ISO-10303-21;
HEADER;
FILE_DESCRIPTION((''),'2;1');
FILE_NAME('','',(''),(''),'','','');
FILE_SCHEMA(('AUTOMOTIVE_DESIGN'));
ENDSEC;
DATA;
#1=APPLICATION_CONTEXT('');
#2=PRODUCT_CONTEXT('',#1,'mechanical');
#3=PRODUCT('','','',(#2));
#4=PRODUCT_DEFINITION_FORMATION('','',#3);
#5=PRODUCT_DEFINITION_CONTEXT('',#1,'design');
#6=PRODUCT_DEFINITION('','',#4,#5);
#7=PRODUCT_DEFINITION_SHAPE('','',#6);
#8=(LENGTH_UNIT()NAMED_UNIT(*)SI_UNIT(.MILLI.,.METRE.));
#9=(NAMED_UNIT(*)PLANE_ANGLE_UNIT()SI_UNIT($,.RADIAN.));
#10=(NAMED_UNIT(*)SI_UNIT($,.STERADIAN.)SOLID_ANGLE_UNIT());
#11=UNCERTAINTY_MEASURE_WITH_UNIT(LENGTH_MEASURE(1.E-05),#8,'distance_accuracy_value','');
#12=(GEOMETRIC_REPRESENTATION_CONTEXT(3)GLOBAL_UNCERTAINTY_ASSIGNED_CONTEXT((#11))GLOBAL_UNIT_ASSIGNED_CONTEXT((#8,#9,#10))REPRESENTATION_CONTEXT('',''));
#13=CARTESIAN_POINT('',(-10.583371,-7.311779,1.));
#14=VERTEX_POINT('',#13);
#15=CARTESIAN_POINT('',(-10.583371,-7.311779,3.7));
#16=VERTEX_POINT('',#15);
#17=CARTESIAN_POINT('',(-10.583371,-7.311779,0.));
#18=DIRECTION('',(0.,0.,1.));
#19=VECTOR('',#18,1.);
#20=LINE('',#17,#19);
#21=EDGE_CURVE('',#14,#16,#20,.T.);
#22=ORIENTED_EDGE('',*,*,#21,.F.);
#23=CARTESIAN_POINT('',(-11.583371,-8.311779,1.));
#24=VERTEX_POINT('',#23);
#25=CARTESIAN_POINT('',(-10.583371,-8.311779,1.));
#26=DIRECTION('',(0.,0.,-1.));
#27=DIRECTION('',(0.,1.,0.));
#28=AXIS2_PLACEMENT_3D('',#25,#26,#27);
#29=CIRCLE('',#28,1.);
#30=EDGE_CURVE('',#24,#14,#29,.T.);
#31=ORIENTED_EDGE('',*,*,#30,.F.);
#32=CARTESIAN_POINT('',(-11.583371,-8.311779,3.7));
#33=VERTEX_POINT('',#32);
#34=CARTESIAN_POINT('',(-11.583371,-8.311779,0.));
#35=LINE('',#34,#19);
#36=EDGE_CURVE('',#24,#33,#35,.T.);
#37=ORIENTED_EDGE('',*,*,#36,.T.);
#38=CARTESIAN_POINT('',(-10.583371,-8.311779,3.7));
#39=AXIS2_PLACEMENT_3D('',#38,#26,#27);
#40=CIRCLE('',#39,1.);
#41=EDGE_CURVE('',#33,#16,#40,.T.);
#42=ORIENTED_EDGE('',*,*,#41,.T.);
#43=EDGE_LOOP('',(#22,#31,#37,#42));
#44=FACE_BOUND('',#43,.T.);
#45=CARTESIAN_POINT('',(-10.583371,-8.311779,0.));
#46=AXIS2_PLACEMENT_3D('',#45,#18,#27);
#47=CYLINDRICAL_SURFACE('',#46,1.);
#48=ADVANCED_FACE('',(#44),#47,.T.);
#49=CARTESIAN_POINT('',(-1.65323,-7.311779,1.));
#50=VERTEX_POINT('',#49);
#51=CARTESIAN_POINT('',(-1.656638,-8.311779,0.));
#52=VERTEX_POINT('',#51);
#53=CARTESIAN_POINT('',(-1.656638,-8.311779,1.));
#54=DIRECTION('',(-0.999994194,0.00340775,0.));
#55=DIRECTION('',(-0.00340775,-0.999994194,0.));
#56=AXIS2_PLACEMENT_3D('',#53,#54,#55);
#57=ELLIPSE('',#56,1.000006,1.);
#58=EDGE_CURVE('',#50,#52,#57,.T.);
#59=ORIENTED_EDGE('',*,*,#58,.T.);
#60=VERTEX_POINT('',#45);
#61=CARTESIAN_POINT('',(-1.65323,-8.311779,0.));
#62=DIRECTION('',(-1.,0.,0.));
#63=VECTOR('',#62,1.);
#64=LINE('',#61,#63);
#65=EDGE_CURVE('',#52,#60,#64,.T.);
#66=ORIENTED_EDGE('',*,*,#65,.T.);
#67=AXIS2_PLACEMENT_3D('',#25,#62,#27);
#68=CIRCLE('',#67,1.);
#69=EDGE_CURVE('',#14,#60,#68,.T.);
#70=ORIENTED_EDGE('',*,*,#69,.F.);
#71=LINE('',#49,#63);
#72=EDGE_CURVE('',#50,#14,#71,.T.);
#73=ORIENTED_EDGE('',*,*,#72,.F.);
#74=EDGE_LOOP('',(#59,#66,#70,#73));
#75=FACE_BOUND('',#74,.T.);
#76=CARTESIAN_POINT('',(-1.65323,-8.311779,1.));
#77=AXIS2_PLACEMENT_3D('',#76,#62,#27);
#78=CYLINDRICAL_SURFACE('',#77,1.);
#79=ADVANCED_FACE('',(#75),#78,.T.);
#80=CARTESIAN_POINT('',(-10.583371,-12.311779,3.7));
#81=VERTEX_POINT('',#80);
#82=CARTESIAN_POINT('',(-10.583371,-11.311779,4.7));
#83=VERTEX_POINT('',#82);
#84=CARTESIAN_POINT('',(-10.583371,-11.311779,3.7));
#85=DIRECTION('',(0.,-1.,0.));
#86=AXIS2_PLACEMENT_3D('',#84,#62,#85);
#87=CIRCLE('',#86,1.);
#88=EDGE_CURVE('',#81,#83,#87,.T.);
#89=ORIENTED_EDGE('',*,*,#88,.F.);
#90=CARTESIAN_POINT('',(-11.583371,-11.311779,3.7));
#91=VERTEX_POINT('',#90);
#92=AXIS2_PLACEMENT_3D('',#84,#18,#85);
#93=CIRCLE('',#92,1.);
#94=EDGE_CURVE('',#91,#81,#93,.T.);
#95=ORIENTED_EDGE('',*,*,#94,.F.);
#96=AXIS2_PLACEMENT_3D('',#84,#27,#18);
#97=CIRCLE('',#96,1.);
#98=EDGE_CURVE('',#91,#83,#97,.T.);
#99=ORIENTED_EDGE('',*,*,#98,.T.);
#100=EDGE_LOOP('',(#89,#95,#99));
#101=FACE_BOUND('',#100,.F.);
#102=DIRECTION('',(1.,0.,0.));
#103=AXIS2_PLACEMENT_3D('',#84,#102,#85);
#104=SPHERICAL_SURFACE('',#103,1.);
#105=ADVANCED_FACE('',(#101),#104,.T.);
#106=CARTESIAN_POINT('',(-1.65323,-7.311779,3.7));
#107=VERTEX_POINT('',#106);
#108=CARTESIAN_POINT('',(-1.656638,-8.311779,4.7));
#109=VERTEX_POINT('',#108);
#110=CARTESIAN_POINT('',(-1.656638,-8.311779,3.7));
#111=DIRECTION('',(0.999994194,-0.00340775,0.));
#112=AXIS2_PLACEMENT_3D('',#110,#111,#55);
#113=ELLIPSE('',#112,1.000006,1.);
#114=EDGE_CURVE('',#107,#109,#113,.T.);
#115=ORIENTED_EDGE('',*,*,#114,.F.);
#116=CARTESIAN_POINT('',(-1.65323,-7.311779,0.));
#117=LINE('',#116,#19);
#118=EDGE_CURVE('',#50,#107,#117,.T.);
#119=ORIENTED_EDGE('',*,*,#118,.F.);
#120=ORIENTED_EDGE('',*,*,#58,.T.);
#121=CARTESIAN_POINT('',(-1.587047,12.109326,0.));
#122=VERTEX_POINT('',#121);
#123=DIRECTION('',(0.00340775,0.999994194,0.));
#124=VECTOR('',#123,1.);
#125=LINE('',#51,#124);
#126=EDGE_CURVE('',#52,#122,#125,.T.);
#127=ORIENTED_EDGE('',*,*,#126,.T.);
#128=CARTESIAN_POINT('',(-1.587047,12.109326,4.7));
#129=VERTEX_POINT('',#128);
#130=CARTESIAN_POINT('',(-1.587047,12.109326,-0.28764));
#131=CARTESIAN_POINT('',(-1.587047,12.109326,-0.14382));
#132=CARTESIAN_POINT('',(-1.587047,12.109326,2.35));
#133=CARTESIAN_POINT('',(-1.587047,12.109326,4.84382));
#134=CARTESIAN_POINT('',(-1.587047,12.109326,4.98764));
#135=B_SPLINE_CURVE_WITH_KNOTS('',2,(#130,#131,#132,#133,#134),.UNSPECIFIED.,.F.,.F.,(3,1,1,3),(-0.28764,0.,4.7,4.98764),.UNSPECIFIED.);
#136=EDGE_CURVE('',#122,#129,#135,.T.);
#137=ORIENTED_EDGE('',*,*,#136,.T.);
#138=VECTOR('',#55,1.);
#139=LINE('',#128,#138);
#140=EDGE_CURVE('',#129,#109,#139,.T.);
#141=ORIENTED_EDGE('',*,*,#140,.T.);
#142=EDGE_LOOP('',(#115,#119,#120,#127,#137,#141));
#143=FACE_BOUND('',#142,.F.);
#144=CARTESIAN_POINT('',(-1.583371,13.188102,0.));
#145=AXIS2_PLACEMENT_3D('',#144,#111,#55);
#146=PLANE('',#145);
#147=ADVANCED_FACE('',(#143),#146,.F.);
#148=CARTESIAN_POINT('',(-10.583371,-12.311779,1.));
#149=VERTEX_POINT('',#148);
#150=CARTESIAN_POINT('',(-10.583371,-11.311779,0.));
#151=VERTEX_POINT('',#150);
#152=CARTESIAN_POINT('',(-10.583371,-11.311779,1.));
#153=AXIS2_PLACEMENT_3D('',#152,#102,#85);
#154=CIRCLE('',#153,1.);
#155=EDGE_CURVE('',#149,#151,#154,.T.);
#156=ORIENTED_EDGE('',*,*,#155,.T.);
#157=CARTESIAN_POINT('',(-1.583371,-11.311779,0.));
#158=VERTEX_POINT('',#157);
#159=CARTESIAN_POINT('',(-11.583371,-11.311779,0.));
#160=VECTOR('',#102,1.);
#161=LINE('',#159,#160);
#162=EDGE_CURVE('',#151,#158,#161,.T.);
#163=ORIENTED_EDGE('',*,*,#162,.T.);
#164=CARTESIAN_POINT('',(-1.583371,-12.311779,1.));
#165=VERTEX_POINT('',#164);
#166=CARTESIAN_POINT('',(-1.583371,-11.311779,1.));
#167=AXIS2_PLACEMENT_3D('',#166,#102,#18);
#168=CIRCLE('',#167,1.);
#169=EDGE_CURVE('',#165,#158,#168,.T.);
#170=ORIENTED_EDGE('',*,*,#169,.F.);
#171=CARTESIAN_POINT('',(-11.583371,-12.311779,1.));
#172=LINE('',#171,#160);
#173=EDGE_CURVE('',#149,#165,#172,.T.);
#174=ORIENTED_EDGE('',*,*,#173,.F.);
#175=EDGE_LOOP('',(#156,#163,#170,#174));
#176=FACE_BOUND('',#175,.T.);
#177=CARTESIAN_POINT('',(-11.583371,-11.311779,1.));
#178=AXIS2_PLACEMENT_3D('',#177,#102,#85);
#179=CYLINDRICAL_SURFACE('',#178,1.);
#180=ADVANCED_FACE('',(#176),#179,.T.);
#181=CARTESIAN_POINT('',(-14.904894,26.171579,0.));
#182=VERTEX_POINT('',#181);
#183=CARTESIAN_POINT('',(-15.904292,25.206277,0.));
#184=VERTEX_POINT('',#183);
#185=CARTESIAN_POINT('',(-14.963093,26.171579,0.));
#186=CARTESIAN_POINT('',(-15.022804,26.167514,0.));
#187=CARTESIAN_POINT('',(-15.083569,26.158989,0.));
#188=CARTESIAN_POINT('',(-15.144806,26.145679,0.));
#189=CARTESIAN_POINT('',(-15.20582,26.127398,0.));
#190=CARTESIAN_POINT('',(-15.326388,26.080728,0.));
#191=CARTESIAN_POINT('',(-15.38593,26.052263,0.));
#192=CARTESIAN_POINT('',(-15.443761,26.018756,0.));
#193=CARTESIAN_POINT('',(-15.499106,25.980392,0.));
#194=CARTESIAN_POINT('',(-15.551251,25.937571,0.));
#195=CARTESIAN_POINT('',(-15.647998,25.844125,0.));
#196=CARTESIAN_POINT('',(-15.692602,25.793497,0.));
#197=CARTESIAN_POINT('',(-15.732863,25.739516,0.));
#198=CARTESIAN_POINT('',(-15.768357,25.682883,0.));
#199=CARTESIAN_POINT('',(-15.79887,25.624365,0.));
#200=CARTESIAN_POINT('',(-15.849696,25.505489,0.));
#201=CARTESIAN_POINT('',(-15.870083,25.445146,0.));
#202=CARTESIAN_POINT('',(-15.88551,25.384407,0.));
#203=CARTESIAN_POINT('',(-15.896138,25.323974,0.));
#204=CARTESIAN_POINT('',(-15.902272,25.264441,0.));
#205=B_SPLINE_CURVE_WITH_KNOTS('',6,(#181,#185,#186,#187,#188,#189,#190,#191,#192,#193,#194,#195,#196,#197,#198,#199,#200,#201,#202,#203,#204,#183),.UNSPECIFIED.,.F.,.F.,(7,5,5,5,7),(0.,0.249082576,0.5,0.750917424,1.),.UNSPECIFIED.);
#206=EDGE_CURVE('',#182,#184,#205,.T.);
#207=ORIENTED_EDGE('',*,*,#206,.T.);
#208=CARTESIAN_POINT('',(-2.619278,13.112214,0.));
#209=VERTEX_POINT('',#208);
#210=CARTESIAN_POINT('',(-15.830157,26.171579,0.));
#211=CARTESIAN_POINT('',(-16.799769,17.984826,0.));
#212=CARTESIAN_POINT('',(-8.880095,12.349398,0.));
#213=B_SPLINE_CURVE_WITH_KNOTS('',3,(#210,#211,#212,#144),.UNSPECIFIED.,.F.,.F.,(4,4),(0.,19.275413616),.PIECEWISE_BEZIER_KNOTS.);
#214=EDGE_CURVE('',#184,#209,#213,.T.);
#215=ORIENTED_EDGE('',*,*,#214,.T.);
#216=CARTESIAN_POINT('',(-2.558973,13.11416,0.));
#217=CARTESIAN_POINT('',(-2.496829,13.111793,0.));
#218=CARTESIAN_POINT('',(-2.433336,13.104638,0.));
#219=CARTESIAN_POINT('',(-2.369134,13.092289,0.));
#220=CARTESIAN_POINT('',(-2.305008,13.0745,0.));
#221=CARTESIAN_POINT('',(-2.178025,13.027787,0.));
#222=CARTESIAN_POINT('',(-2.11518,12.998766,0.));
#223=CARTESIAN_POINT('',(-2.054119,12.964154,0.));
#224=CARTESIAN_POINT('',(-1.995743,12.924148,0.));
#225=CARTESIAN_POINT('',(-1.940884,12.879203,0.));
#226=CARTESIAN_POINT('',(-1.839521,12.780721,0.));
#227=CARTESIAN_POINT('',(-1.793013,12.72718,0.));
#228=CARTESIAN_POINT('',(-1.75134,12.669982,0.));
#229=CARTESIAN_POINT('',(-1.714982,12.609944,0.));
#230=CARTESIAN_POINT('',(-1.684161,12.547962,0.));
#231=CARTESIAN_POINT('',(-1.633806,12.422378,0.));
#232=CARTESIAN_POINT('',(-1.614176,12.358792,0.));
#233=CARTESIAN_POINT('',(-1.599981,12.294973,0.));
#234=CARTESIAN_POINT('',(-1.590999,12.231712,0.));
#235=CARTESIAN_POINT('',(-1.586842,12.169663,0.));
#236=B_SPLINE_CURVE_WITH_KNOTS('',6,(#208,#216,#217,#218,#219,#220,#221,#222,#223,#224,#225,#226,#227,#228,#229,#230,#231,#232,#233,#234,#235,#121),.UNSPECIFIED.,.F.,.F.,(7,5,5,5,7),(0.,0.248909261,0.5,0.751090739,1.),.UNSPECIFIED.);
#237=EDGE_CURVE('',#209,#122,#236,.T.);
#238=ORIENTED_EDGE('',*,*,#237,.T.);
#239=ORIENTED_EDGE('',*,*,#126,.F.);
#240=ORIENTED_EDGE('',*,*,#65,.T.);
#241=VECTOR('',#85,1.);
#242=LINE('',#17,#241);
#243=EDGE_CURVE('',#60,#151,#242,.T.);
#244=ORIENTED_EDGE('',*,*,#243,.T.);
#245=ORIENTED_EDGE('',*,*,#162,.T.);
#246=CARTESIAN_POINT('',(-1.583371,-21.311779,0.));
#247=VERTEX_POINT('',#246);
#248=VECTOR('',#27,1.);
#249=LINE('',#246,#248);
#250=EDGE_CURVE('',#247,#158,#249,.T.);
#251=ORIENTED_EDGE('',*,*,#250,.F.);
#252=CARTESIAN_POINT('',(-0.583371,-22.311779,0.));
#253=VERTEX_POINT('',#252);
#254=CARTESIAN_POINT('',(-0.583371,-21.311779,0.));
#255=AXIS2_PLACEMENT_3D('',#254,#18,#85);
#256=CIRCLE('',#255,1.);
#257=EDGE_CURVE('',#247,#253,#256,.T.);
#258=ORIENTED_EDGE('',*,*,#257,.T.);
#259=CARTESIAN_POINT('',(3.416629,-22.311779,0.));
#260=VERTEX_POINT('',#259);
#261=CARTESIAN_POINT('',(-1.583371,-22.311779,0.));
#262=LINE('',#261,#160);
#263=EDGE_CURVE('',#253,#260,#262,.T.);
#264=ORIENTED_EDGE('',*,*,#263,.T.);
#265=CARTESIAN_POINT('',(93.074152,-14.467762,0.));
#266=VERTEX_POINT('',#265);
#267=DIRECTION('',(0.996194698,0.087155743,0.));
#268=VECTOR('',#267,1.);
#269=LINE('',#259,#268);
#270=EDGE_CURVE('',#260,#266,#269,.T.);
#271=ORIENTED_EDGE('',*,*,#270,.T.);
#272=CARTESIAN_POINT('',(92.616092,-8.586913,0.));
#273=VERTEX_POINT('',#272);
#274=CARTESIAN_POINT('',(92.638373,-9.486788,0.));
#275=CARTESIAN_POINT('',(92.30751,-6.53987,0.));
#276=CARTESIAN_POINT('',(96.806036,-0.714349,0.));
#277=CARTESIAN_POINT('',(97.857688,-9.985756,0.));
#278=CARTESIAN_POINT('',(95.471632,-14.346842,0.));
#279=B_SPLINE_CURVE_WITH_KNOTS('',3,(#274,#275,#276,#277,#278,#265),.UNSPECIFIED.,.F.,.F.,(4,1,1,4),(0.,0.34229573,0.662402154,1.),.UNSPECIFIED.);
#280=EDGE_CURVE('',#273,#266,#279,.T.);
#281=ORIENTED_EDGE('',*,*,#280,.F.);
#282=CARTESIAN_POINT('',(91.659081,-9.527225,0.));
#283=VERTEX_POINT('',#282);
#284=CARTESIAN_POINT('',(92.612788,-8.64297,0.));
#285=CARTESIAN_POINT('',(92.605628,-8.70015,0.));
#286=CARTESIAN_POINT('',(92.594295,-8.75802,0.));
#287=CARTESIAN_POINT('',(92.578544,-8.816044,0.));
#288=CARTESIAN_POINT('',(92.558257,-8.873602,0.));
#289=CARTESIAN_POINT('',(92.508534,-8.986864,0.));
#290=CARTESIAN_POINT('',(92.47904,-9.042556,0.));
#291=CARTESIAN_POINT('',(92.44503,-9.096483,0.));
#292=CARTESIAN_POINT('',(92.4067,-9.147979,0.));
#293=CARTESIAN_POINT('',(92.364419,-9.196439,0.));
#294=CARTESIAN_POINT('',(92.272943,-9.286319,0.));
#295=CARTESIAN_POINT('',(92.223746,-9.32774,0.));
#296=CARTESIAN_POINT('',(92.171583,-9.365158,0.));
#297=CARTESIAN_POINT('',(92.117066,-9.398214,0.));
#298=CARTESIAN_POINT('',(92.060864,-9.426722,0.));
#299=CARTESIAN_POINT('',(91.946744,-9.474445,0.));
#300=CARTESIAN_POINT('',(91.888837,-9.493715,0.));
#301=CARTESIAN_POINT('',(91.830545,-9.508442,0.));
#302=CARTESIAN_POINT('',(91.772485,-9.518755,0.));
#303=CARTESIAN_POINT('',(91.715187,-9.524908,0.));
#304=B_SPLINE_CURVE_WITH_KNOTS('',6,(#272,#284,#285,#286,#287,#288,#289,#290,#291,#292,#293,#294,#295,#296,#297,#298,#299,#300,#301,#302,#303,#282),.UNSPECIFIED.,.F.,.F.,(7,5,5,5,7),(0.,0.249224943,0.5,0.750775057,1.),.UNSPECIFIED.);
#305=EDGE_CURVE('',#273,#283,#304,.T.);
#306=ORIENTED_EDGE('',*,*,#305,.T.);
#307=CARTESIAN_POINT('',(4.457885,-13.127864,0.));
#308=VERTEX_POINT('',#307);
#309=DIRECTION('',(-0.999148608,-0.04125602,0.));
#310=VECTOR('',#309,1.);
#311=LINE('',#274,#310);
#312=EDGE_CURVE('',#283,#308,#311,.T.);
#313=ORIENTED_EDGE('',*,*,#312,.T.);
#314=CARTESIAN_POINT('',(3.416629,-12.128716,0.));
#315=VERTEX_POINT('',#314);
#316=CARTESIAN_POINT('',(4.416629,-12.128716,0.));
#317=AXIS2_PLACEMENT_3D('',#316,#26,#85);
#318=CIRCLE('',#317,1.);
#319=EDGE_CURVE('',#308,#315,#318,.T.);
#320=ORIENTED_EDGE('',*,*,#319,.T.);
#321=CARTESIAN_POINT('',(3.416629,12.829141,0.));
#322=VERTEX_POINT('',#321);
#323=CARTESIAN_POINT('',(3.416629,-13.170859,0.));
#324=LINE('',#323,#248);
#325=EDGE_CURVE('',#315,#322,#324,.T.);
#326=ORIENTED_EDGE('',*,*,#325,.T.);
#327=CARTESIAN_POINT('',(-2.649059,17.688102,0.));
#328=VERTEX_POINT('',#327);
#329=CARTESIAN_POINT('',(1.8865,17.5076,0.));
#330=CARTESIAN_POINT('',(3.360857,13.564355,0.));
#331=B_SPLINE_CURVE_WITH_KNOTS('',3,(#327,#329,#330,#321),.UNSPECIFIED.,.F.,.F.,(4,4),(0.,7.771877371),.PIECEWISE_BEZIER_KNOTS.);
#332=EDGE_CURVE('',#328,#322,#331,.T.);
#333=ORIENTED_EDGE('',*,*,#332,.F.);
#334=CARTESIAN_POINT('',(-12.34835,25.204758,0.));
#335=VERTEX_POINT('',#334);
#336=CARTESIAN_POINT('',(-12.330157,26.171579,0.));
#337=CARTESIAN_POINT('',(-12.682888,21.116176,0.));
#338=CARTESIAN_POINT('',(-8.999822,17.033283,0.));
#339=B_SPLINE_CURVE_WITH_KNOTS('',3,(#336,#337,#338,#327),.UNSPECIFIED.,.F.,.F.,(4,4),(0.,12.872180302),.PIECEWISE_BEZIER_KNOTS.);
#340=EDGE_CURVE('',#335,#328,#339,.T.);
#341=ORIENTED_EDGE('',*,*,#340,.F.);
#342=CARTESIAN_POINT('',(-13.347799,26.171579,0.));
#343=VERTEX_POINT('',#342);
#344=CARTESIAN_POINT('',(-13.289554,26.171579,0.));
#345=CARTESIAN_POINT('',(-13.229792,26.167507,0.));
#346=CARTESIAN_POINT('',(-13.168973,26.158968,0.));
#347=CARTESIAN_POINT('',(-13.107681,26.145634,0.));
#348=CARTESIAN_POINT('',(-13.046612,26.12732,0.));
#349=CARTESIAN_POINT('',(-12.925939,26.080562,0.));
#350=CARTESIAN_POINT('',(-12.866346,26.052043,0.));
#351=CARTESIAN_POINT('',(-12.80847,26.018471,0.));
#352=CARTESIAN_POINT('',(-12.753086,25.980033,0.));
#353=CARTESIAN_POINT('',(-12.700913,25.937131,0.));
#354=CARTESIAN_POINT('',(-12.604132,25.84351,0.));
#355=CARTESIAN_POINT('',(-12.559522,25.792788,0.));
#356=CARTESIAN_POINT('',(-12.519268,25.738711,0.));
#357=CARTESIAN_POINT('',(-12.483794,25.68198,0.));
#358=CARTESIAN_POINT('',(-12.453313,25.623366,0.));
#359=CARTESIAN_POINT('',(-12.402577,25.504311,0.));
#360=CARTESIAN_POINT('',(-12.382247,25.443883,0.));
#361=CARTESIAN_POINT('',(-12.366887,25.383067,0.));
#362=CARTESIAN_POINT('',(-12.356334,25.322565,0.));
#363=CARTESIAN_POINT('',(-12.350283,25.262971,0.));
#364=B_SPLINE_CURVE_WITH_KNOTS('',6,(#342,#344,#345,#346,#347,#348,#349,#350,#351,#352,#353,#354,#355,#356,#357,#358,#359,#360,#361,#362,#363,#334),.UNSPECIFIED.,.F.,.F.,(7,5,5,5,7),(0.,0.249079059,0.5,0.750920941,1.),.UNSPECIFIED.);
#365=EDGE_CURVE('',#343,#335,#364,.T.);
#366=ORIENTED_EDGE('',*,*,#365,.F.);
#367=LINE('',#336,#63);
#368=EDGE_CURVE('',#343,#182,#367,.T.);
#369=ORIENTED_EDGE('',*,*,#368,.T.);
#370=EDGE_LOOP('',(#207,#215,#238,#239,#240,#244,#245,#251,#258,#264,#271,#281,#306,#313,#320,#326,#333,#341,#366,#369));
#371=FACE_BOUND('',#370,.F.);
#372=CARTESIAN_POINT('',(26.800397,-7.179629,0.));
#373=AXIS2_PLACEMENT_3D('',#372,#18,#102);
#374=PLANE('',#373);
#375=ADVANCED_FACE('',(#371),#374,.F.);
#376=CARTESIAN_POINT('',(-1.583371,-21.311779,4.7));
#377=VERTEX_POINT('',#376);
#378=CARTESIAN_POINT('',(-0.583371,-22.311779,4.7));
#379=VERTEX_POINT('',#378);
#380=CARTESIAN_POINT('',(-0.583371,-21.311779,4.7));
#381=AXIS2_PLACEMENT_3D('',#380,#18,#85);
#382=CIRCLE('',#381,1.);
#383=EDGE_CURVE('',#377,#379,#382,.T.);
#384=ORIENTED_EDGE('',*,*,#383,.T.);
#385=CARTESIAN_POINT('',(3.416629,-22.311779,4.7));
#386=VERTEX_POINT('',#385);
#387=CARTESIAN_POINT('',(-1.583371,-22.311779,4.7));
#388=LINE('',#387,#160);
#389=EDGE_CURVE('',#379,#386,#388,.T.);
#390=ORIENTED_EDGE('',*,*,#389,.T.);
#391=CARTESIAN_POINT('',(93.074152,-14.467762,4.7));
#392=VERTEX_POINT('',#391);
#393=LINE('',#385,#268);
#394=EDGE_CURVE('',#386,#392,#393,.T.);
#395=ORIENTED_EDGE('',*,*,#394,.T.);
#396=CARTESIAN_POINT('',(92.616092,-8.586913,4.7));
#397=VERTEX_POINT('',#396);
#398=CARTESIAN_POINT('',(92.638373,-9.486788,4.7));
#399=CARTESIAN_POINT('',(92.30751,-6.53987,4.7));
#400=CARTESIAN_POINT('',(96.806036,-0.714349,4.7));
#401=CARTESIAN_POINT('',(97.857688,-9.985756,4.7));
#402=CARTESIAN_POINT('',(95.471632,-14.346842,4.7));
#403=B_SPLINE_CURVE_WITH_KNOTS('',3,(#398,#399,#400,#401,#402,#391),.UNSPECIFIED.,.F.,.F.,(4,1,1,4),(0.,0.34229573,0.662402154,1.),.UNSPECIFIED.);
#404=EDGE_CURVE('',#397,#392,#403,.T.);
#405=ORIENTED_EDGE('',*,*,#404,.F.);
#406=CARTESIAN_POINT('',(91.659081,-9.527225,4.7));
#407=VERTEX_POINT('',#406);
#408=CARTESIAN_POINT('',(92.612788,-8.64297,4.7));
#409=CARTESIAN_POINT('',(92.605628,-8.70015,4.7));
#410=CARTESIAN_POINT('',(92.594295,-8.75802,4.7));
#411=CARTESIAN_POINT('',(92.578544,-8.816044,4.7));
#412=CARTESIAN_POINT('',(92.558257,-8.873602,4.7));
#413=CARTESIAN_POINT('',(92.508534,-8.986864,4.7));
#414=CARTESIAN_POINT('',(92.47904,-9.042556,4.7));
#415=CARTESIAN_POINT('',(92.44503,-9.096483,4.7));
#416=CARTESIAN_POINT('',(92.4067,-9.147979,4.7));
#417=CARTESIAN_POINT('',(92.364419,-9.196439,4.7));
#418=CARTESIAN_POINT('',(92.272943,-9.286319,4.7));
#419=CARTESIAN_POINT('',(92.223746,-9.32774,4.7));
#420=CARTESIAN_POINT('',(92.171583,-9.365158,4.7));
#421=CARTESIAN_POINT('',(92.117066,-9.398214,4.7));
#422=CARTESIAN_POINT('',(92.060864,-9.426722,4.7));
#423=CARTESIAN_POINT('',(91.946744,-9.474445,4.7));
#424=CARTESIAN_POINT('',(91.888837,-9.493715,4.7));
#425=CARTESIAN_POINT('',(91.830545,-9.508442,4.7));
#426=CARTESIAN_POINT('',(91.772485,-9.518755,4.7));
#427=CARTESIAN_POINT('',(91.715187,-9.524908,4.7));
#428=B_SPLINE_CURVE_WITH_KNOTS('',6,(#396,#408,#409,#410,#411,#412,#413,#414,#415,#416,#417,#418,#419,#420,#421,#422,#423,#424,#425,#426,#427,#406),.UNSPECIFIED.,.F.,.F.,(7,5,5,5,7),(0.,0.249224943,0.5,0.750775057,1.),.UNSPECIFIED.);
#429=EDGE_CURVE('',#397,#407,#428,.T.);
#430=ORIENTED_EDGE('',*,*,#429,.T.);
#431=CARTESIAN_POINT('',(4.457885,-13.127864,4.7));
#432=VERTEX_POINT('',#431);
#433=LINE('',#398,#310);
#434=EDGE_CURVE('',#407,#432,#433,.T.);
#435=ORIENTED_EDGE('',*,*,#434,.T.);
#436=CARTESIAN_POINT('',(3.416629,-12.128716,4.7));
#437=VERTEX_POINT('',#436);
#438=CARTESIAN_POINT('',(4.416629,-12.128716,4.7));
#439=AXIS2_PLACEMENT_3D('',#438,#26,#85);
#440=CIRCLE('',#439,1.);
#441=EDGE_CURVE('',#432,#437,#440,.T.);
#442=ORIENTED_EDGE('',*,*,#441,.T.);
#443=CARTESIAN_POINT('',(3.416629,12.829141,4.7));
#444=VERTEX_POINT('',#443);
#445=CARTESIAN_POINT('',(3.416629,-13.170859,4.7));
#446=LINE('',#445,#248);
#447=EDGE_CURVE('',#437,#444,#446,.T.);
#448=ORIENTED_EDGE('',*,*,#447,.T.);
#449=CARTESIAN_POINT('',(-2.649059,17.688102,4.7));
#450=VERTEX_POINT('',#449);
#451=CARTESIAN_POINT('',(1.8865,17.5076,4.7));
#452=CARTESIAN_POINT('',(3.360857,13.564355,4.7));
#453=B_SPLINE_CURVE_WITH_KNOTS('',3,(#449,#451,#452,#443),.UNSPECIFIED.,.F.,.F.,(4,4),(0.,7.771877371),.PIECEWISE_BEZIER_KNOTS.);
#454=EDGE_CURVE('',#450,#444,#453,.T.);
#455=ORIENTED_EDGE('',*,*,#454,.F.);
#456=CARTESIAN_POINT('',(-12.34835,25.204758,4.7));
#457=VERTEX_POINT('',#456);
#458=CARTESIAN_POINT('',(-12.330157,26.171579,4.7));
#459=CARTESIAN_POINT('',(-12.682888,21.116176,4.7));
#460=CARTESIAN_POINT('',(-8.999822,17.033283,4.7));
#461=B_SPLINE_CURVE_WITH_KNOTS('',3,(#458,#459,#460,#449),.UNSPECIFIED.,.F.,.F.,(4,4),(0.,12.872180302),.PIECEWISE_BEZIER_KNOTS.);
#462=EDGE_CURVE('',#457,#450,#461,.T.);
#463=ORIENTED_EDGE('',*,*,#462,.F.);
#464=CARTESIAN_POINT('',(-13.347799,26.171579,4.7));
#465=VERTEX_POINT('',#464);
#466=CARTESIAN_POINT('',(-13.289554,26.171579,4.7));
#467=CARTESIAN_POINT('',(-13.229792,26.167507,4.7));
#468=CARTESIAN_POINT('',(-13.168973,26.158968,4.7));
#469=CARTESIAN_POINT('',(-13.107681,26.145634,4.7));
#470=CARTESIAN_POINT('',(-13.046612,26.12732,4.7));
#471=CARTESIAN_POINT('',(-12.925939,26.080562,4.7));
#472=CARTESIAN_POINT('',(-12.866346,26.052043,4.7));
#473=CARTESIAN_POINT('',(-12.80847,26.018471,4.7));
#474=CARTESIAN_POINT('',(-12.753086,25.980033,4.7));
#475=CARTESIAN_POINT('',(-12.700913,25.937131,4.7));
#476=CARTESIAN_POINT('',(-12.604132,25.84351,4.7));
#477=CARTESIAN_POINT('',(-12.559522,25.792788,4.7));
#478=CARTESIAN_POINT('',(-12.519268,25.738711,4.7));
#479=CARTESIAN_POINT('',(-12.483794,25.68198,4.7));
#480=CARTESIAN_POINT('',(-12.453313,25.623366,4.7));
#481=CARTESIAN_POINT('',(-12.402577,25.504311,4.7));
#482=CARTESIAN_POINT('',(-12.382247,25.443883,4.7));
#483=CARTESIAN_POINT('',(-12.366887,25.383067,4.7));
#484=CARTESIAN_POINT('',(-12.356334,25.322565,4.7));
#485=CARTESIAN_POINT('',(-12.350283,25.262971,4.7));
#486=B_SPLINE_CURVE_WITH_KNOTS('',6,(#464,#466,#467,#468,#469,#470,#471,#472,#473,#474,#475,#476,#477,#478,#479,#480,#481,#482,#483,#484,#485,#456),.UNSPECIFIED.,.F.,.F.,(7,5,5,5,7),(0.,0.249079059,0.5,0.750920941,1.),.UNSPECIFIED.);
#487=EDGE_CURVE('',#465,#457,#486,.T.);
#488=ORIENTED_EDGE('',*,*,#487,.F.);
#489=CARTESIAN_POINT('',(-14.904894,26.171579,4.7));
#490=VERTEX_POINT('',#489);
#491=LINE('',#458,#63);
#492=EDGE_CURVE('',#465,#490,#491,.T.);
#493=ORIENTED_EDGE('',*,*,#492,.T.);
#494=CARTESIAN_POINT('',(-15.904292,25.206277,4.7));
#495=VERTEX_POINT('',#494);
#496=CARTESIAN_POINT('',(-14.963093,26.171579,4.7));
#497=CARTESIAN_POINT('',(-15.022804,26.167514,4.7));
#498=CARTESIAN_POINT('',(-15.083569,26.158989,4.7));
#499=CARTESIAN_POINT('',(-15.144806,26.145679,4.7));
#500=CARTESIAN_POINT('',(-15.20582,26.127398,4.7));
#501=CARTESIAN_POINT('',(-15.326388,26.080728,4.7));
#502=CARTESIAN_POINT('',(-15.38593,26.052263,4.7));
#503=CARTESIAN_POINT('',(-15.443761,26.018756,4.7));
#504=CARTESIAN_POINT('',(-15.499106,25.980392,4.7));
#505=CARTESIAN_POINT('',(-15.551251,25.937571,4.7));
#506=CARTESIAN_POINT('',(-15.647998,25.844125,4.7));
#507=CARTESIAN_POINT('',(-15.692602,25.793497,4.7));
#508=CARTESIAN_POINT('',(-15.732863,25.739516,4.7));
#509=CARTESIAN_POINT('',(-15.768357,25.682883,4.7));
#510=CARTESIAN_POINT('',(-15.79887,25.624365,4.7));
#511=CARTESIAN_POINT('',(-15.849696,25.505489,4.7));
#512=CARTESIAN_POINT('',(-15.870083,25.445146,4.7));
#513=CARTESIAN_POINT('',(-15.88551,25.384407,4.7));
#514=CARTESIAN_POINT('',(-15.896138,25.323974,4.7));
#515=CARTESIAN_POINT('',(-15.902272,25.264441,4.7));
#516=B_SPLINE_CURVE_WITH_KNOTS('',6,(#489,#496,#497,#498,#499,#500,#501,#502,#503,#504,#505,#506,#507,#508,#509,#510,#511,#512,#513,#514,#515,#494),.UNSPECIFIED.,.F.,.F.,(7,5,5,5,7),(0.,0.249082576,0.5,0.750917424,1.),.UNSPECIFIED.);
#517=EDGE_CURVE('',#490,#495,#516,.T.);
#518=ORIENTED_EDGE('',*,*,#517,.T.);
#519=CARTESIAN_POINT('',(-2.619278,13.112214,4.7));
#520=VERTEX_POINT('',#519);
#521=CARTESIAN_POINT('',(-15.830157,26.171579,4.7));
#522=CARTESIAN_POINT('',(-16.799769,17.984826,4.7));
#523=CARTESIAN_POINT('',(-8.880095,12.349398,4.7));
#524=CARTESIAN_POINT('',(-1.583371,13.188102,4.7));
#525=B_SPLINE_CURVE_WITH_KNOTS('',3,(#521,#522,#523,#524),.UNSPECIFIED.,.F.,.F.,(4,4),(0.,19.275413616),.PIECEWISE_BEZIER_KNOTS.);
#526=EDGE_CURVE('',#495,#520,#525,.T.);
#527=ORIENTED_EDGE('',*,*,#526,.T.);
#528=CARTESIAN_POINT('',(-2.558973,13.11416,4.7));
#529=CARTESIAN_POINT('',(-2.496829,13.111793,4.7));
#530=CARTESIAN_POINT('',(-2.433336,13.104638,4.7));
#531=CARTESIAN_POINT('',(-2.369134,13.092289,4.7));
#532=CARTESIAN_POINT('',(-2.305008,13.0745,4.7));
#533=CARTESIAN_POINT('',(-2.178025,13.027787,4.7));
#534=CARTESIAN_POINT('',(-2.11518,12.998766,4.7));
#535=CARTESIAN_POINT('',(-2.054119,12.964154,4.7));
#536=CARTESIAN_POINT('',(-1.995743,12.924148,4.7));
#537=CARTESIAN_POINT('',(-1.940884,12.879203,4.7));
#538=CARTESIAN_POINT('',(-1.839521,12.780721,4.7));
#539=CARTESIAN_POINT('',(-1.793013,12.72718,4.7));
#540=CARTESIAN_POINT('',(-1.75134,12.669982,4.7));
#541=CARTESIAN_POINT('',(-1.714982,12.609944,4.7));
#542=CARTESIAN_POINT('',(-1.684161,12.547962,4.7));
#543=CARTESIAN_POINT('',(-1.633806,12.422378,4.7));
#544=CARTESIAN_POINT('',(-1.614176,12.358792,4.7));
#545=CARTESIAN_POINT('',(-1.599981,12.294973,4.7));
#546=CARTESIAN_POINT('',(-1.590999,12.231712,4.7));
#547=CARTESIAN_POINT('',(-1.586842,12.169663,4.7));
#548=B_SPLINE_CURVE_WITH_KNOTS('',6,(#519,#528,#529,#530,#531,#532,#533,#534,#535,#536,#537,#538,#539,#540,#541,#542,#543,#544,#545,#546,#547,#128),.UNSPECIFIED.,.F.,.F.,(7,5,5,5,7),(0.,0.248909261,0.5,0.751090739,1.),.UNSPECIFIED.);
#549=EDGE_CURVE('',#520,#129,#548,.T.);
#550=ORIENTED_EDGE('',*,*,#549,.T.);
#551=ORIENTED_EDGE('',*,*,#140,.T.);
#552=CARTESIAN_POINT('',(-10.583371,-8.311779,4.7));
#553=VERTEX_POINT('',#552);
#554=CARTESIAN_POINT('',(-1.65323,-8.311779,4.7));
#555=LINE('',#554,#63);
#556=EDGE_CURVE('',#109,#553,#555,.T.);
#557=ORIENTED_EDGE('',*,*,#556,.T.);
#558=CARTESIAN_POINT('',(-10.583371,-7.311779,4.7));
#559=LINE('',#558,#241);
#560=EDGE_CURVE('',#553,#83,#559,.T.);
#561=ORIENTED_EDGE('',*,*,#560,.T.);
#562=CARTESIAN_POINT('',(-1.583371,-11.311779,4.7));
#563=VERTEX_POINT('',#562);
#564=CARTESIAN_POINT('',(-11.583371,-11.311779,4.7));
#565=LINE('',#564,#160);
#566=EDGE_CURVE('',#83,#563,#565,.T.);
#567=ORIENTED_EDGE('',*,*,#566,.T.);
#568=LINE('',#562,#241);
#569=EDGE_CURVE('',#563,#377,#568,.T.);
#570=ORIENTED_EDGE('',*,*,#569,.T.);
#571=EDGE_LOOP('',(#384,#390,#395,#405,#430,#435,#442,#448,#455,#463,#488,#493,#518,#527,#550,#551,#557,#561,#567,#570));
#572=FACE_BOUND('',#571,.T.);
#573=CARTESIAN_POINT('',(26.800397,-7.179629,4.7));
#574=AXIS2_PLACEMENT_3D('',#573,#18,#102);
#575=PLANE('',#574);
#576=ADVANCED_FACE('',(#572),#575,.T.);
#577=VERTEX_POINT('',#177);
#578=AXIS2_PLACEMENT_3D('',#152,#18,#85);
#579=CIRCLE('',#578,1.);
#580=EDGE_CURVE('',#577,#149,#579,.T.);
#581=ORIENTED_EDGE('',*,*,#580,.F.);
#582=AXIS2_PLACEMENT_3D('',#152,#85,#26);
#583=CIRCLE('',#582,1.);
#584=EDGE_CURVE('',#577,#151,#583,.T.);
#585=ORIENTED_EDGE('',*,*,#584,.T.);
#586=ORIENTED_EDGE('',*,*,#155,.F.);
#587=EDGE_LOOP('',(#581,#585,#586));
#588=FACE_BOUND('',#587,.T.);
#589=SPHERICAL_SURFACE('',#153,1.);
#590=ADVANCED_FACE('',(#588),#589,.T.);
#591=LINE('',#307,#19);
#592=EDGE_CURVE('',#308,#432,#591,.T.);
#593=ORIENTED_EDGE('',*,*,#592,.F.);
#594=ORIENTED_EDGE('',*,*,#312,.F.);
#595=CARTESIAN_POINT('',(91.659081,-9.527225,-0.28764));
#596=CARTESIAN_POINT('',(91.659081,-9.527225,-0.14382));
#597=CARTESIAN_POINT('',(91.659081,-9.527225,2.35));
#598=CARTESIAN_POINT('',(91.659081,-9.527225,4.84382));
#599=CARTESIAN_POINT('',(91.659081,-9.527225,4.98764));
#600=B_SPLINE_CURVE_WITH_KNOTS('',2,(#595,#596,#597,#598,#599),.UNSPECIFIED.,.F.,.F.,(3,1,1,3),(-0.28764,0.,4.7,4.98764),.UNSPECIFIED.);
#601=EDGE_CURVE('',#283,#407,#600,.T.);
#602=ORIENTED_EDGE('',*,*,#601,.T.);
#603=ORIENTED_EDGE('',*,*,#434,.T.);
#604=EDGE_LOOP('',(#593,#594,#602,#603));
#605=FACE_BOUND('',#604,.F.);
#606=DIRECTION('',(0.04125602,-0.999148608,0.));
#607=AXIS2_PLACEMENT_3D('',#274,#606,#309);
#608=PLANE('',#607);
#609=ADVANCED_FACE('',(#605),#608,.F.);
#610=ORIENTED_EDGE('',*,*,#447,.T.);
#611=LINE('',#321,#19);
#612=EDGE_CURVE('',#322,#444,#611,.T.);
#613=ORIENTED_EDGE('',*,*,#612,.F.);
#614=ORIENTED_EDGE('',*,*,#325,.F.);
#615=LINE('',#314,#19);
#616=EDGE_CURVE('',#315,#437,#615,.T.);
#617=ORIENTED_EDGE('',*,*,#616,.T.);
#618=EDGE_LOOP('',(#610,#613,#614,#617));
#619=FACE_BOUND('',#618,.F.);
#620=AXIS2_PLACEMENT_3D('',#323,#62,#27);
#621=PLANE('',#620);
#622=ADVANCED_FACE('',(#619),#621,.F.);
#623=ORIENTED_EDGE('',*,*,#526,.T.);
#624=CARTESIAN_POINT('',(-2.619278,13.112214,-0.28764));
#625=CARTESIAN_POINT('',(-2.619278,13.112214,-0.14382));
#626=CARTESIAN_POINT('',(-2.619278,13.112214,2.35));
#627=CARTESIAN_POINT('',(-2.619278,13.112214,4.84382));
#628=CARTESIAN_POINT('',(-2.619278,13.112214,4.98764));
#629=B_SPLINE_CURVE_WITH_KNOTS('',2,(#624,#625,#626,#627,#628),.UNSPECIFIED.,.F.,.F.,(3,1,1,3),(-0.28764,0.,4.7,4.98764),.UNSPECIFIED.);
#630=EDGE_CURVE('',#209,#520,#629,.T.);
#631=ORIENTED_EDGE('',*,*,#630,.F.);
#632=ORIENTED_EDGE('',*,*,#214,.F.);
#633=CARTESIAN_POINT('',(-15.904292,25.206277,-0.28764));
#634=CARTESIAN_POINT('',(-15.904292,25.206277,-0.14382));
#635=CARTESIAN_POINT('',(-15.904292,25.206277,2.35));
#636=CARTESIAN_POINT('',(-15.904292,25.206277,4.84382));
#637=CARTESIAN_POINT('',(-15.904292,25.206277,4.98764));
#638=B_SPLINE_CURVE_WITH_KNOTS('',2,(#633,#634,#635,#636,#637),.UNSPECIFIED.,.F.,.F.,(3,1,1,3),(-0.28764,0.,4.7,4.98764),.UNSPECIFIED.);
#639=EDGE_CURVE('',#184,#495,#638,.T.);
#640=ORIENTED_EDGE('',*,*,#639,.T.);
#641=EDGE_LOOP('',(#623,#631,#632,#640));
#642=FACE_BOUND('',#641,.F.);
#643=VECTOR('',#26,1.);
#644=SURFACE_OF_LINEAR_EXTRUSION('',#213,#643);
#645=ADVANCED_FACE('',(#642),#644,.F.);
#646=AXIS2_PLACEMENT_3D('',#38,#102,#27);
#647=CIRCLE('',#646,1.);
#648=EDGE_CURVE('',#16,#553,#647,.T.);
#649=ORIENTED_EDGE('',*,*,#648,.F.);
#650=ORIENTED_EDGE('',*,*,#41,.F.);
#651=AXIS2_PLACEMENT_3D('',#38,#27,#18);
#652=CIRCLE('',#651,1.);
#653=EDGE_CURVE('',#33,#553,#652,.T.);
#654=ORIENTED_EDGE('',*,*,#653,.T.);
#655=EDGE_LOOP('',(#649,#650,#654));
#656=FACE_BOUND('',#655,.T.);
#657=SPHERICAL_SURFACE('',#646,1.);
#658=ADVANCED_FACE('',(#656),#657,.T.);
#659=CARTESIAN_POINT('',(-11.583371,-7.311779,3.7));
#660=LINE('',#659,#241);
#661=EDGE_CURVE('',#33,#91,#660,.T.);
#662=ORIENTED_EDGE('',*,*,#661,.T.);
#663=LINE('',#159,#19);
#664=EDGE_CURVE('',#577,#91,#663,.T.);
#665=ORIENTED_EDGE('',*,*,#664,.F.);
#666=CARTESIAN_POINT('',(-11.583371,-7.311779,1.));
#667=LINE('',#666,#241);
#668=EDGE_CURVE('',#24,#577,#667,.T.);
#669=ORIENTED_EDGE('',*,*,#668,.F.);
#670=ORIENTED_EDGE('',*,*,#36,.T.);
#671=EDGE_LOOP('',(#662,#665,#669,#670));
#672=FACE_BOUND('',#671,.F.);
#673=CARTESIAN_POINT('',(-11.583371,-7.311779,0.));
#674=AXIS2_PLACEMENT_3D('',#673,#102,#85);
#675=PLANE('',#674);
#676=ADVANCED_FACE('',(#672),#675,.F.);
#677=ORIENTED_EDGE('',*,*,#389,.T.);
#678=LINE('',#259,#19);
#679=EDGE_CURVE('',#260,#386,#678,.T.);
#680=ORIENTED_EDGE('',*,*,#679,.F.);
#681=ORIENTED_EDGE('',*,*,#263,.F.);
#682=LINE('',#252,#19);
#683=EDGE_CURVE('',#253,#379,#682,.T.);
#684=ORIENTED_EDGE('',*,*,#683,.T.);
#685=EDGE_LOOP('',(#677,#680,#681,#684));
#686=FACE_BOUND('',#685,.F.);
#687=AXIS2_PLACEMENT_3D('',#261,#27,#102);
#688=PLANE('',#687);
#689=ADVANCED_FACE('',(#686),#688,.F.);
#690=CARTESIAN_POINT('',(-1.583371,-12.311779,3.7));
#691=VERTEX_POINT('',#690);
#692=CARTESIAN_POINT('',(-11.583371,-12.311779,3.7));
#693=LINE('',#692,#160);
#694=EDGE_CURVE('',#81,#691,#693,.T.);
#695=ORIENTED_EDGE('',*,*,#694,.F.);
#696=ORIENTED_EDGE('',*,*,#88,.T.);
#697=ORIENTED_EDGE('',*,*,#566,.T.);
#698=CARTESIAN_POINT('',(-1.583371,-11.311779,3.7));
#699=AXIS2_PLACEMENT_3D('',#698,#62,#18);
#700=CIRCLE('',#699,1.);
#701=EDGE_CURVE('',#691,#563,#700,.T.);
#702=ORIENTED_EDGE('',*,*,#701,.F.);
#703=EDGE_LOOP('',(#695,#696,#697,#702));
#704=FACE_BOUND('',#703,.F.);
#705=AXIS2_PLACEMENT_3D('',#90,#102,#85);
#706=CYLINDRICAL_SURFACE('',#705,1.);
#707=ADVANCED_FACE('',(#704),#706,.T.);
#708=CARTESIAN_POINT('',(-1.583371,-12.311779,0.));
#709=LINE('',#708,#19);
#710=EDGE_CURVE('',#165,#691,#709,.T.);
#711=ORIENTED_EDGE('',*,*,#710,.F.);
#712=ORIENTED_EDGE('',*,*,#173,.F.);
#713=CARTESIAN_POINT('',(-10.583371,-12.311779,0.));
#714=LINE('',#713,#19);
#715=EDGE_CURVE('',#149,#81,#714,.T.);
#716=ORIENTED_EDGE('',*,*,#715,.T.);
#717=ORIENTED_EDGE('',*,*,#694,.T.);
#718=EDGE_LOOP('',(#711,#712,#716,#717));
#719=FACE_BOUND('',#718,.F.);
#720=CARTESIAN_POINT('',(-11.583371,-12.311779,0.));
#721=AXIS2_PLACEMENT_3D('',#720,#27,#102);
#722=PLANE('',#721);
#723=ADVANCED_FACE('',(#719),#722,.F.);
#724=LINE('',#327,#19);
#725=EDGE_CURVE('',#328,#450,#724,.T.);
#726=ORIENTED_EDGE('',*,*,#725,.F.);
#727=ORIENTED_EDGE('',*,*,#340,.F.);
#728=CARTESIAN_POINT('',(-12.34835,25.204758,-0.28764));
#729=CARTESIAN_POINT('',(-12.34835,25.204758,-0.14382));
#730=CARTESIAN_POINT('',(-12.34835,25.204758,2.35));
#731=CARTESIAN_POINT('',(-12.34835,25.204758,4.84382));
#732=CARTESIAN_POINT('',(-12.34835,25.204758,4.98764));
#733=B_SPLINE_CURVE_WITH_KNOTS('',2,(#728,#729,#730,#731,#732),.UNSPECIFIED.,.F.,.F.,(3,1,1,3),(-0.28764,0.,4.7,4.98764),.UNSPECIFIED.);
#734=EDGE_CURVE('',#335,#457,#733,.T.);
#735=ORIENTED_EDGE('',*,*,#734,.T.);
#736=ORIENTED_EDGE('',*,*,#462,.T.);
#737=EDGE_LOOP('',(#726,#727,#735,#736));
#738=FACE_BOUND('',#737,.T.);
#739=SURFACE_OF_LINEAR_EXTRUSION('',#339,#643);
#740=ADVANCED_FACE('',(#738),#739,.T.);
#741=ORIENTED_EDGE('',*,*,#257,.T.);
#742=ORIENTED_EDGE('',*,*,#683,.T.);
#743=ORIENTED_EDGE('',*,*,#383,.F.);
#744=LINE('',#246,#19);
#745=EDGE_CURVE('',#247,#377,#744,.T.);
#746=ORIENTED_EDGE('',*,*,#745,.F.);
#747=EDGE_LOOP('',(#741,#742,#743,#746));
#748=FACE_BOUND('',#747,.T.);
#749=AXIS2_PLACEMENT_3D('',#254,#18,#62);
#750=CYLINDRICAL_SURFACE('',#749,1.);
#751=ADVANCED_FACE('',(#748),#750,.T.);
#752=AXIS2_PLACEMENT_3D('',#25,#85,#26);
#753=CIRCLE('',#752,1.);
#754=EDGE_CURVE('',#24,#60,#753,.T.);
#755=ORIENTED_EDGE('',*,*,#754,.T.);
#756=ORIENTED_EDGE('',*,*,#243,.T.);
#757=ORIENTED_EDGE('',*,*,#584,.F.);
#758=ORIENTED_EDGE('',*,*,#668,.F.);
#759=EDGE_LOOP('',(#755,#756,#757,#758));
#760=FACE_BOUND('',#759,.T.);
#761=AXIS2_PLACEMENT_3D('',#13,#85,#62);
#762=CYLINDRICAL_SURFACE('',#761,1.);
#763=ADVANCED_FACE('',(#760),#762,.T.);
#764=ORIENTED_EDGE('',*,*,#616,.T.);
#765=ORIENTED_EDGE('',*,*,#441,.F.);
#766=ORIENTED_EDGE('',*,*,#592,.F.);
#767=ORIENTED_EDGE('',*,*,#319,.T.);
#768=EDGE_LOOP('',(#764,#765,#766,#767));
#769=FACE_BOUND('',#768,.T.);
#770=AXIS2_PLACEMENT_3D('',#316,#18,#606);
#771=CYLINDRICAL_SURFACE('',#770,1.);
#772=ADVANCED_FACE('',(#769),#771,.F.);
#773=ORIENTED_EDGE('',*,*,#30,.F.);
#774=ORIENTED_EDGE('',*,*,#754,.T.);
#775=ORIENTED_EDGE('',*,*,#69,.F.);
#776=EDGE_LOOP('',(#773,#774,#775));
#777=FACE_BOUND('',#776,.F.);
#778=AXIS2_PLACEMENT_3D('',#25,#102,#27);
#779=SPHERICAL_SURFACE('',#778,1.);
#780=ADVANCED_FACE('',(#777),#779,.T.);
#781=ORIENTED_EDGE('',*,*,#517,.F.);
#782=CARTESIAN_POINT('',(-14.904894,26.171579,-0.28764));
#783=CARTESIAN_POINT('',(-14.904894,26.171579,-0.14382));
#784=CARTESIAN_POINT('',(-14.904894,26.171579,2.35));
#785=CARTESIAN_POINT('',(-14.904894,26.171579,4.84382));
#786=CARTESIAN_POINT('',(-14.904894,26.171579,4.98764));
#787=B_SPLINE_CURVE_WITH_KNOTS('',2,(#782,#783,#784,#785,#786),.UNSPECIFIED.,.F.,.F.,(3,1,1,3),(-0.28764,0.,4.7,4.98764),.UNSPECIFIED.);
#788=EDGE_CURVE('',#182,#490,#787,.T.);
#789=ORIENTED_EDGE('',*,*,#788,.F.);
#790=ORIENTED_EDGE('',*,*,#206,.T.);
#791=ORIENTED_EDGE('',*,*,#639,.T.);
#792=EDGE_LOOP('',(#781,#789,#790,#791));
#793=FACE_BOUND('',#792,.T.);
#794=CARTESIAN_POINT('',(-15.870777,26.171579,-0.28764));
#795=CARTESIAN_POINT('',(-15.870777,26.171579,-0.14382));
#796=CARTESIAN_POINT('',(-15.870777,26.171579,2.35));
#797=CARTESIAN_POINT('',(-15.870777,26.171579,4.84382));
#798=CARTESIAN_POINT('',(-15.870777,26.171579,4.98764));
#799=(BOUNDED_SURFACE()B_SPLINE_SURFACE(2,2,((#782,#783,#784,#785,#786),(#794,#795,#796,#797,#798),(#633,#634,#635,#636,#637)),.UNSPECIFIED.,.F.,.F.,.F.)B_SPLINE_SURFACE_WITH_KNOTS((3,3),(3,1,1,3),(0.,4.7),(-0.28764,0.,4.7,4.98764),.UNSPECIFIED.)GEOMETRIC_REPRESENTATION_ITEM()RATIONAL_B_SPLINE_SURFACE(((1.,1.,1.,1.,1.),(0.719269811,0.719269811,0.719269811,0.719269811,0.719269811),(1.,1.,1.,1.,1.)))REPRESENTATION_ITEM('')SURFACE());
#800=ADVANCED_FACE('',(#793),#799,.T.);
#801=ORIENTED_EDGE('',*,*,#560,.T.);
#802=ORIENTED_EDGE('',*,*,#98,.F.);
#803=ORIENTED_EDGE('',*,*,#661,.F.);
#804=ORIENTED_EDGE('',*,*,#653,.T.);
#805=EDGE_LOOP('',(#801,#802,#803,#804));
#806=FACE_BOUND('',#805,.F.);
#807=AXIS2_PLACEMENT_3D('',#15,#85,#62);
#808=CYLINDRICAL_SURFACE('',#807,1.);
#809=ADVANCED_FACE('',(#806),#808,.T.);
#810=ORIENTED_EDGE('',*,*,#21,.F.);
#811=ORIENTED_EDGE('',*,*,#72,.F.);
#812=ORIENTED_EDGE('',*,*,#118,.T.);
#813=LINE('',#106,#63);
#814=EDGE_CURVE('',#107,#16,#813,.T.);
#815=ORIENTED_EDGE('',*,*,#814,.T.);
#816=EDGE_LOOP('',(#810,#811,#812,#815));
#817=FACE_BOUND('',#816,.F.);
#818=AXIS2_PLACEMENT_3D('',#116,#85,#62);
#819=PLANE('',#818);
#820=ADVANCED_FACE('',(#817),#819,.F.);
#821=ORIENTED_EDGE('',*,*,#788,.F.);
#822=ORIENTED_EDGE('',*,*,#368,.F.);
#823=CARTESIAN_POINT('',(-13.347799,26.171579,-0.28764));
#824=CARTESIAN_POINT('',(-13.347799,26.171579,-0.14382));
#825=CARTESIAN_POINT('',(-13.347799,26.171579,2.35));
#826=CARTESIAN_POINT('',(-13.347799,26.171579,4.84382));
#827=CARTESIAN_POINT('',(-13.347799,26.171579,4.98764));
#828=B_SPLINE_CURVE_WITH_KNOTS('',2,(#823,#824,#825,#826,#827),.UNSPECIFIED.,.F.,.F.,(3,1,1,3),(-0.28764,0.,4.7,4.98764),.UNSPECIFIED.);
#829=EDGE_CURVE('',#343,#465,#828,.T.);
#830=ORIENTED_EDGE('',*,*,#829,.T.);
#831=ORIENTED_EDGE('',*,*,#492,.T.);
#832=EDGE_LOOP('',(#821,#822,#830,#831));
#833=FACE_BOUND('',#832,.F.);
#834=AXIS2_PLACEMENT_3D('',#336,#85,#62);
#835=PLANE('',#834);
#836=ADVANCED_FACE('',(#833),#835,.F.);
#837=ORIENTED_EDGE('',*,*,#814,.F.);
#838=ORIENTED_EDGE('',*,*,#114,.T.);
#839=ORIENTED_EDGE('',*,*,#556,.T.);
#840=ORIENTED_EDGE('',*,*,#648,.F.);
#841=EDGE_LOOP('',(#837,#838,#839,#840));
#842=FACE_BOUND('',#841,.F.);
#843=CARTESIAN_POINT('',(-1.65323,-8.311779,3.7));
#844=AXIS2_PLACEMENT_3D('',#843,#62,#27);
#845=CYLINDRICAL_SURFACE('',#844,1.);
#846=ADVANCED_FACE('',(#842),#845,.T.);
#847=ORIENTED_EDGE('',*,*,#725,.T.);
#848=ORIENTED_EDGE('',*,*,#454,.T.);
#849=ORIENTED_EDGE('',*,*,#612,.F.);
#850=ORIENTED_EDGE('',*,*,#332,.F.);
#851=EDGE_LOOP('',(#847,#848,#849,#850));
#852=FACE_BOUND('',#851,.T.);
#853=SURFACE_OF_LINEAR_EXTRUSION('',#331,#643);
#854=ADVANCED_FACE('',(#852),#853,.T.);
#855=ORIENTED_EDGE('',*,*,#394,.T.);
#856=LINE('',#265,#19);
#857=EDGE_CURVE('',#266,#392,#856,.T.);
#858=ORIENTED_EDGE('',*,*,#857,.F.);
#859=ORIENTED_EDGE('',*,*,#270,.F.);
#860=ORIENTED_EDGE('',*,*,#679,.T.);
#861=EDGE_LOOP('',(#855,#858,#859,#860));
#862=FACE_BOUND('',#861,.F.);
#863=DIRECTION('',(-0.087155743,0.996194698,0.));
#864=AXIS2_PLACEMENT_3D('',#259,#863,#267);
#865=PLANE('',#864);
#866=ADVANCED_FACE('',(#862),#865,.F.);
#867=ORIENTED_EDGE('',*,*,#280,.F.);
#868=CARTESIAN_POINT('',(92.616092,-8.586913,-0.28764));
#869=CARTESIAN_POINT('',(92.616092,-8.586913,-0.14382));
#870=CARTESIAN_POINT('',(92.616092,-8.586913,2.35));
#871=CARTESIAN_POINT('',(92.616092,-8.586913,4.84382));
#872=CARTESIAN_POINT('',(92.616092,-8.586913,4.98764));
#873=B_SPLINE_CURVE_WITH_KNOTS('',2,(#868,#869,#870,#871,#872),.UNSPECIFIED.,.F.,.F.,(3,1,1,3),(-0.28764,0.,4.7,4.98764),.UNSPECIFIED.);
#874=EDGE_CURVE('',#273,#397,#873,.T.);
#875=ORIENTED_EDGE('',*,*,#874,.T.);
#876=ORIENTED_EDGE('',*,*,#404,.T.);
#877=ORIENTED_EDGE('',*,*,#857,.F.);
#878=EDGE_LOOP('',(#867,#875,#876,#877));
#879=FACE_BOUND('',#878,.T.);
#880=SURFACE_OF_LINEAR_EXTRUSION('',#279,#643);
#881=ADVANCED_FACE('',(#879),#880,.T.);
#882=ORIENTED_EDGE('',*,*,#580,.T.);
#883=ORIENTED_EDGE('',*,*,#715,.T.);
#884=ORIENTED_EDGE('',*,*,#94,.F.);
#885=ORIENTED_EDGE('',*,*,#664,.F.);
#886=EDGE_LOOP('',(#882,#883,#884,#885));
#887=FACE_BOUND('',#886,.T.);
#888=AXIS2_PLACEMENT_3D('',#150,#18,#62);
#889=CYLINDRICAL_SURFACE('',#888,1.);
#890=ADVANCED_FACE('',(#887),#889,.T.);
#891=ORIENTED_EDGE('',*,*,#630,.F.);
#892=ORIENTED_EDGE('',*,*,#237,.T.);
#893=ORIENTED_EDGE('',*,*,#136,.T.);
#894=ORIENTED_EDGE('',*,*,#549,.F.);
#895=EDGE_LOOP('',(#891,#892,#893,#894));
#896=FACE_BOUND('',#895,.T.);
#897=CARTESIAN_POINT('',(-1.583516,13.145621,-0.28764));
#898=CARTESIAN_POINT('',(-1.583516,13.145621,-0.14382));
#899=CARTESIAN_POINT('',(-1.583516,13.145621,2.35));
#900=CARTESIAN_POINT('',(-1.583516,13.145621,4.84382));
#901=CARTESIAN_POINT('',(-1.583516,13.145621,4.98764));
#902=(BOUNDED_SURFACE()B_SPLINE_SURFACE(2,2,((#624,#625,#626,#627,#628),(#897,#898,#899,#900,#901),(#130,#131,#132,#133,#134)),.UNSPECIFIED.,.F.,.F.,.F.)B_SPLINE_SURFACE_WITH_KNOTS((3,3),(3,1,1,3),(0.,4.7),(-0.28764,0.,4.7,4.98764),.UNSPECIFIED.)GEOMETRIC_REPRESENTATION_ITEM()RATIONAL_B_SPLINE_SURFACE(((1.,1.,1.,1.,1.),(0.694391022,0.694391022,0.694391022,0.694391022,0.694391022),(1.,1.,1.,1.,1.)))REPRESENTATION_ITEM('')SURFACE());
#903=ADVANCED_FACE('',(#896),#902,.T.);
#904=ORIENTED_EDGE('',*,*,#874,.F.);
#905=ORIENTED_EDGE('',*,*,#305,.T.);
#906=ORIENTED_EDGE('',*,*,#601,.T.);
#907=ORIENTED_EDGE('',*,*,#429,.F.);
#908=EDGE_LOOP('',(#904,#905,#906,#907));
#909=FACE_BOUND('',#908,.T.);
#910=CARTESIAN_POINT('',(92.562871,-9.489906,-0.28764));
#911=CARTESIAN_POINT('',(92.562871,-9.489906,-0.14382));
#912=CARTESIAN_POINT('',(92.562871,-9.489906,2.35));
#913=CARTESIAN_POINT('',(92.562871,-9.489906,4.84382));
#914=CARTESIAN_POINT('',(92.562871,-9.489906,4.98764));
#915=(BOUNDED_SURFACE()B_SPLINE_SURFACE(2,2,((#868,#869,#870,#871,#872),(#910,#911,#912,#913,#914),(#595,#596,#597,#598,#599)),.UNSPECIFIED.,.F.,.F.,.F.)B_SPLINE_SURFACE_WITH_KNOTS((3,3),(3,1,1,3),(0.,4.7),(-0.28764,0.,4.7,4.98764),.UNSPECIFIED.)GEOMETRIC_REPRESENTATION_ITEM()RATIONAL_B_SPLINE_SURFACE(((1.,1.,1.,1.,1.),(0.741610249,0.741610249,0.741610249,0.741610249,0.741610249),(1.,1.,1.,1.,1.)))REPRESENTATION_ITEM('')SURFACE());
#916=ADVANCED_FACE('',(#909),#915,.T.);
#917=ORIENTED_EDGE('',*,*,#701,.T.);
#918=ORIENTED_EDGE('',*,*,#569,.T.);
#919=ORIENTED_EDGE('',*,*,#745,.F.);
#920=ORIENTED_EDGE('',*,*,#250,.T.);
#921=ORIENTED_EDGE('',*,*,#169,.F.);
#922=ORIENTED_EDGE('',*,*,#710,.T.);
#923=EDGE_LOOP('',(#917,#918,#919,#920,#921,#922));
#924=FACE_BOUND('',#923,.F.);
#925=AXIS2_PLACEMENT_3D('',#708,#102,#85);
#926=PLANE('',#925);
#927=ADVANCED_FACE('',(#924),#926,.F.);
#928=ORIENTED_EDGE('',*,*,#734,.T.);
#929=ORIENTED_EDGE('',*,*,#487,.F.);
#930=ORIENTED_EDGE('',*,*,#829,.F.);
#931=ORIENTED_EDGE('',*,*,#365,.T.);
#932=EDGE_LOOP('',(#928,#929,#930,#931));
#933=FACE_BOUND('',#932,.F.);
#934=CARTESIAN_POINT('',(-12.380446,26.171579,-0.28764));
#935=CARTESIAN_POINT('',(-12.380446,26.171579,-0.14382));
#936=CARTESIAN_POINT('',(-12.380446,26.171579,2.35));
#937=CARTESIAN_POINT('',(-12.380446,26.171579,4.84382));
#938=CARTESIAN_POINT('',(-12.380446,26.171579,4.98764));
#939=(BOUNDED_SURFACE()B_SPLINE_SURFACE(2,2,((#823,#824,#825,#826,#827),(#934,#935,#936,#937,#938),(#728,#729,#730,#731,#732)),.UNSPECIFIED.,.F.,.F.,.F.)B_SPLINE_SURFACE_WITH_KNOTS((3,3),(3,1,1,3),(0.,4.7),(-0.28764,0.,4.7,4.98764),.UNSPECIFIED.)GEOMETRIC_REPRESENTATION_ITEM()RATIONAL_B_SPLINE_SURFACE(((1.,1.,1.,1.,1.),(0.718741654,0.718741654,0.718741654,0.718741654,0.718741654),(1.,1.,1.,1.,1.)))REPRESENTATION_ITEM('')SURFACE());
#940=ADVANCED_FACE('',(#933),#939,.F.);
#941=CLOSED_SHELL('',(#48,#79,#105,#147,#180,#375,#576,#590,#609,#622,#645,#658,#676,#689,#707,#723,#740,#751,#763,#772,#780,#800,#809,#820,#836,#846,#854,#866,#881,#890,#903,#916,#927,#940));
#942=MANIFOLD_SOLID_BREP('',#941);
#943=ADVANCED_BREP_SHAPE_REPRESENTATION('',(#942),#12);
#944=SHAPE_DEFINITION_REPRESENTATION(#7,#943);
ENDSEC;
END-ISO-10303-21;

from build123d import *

# Parameters (mm, degrees)
F1_DEPTH = 4.7
F2_R     = 1


with BuildPart() as f1:
    # F0 (on Top) → F1 (new body)
    with BuildSketch(Plane.XY):
        with BuildLine():
            Line((-12.3301572212, 26.1715785798), (-15.8301572212, 26.1715785798))
            add(Edge.make_bspline(
                [(-15.8301572212, 26.1715785798), (-16.7997692679, 17.9848263993), (-8.8800950357, 12.3493980705), (-1.5833711872, 13.1881022432)],
                knots=[0, 0, 0, 0, 19.2754136163, 19.2754136163, 19.2754136163, 19.2754136163], degree=3))
            Line((-1.5833711872, 13.1881022432), (-1.6532300643, -7.3117787256))
            Line((-1.6532300643, -7.3117787256), (-11.5833711872, -7.3117787256))
            Line((-11.5833711872, -7.3117787256), (-11.5833711872, -12.3117787256))
            Line((-11.5833711872, -12.3117787256), (-1.5833711872, -12.3117787256))
            Line((-1.5833711872, -12.3117787256), (-1.5833711872, -22.3117787256))
            Line((-1.5833711872, -22.3117787256), (3.4166288128, -22.3117787256))
            Line((3.4166288128, -22.3117787256), (93.074151641, -14.4677618783))
            Line((93.074151641, -14.4677618783), (92.6383729273, -9.4867883879))
            Line((92.6383729273, -9.4867883879), (3.4166288128, -13.1708589983))
            Line((3.4166288128, -13.1708589983), (3.4166288128, 12.8291410017))
            add(Edge.make_bspline(
                [(-2.649059402, 17.6881022432), (1.8865002444, 17.5075998859), (3.3608573382, 13.5643548658), (3.4166288128, 12.8291410017)],
                knots=[0, 0, 0, 0, 7.7718773708, 7.7718773708, 7.7718773708, 7.7718773708], degree=3))
            add(Edge.make_bspline(
                [(-12.3301572212, 26.1715785798), (-12.6828875853, 21.1161755461), (-8.9998222388, 17.0332827738), (-2.649059402, 17.6881022432)],
                knots=[0, 0, 0, 0, 12.8721803023, 12.8721803023, 12.8721803023, 12.8721803023], degree=3))
        make_face()
        with BuildLine():
            add(Edge.make_bspline(
                [(92.6383729273, -9.4867883879), (92.3075102355, -6.5398698428), (96.8060362316, -0.7143486372), (97.8576879629, -9.9857558243), (95.4716324541, -14.3468420863), (93.074151641, -14.4677618783)],
                knots=[0, 0, 0, 0, 0.3422957302, 0.6624021544, 1, 1, 1, 1], degree=3))
            Line((92.6383729273, -9.4867883879), (93.074151641, -14.4677618783))
        make_face()
    extrude(amount=F1_DEPTH)

    # F2
    f2_edges = [f1.edges().sort_by_distance(p)[0] for p in [
        (-6.618301, -7.311779, 4.7),
        (-6.583371, -12.311779, 4.7),
        (-6.618301, -7.311779, 0),
        (-6.583371, -12.311779, 0),
        (-11.583371, -7.311779, 2.35),
        (-11.583371, -12.311779, 2.35),
        (-11.583371, -9.811779, 0),
        (-11.583371, -9.811779, 4.7),
        (-15.830157, 26.171579, 2.35),
        (-12.330157, 26.171579, 2.35),
        (-1.583371, 13.188102, 2.35),
        (-1.583371, -22.311779, 2.35),
        (92.638373, -9.486788, 2.35),
        (3.416629, -13.170859, 2.35),
    ]]
    fillet(f2_edges, radius=F2_R)


solid = f1.part
